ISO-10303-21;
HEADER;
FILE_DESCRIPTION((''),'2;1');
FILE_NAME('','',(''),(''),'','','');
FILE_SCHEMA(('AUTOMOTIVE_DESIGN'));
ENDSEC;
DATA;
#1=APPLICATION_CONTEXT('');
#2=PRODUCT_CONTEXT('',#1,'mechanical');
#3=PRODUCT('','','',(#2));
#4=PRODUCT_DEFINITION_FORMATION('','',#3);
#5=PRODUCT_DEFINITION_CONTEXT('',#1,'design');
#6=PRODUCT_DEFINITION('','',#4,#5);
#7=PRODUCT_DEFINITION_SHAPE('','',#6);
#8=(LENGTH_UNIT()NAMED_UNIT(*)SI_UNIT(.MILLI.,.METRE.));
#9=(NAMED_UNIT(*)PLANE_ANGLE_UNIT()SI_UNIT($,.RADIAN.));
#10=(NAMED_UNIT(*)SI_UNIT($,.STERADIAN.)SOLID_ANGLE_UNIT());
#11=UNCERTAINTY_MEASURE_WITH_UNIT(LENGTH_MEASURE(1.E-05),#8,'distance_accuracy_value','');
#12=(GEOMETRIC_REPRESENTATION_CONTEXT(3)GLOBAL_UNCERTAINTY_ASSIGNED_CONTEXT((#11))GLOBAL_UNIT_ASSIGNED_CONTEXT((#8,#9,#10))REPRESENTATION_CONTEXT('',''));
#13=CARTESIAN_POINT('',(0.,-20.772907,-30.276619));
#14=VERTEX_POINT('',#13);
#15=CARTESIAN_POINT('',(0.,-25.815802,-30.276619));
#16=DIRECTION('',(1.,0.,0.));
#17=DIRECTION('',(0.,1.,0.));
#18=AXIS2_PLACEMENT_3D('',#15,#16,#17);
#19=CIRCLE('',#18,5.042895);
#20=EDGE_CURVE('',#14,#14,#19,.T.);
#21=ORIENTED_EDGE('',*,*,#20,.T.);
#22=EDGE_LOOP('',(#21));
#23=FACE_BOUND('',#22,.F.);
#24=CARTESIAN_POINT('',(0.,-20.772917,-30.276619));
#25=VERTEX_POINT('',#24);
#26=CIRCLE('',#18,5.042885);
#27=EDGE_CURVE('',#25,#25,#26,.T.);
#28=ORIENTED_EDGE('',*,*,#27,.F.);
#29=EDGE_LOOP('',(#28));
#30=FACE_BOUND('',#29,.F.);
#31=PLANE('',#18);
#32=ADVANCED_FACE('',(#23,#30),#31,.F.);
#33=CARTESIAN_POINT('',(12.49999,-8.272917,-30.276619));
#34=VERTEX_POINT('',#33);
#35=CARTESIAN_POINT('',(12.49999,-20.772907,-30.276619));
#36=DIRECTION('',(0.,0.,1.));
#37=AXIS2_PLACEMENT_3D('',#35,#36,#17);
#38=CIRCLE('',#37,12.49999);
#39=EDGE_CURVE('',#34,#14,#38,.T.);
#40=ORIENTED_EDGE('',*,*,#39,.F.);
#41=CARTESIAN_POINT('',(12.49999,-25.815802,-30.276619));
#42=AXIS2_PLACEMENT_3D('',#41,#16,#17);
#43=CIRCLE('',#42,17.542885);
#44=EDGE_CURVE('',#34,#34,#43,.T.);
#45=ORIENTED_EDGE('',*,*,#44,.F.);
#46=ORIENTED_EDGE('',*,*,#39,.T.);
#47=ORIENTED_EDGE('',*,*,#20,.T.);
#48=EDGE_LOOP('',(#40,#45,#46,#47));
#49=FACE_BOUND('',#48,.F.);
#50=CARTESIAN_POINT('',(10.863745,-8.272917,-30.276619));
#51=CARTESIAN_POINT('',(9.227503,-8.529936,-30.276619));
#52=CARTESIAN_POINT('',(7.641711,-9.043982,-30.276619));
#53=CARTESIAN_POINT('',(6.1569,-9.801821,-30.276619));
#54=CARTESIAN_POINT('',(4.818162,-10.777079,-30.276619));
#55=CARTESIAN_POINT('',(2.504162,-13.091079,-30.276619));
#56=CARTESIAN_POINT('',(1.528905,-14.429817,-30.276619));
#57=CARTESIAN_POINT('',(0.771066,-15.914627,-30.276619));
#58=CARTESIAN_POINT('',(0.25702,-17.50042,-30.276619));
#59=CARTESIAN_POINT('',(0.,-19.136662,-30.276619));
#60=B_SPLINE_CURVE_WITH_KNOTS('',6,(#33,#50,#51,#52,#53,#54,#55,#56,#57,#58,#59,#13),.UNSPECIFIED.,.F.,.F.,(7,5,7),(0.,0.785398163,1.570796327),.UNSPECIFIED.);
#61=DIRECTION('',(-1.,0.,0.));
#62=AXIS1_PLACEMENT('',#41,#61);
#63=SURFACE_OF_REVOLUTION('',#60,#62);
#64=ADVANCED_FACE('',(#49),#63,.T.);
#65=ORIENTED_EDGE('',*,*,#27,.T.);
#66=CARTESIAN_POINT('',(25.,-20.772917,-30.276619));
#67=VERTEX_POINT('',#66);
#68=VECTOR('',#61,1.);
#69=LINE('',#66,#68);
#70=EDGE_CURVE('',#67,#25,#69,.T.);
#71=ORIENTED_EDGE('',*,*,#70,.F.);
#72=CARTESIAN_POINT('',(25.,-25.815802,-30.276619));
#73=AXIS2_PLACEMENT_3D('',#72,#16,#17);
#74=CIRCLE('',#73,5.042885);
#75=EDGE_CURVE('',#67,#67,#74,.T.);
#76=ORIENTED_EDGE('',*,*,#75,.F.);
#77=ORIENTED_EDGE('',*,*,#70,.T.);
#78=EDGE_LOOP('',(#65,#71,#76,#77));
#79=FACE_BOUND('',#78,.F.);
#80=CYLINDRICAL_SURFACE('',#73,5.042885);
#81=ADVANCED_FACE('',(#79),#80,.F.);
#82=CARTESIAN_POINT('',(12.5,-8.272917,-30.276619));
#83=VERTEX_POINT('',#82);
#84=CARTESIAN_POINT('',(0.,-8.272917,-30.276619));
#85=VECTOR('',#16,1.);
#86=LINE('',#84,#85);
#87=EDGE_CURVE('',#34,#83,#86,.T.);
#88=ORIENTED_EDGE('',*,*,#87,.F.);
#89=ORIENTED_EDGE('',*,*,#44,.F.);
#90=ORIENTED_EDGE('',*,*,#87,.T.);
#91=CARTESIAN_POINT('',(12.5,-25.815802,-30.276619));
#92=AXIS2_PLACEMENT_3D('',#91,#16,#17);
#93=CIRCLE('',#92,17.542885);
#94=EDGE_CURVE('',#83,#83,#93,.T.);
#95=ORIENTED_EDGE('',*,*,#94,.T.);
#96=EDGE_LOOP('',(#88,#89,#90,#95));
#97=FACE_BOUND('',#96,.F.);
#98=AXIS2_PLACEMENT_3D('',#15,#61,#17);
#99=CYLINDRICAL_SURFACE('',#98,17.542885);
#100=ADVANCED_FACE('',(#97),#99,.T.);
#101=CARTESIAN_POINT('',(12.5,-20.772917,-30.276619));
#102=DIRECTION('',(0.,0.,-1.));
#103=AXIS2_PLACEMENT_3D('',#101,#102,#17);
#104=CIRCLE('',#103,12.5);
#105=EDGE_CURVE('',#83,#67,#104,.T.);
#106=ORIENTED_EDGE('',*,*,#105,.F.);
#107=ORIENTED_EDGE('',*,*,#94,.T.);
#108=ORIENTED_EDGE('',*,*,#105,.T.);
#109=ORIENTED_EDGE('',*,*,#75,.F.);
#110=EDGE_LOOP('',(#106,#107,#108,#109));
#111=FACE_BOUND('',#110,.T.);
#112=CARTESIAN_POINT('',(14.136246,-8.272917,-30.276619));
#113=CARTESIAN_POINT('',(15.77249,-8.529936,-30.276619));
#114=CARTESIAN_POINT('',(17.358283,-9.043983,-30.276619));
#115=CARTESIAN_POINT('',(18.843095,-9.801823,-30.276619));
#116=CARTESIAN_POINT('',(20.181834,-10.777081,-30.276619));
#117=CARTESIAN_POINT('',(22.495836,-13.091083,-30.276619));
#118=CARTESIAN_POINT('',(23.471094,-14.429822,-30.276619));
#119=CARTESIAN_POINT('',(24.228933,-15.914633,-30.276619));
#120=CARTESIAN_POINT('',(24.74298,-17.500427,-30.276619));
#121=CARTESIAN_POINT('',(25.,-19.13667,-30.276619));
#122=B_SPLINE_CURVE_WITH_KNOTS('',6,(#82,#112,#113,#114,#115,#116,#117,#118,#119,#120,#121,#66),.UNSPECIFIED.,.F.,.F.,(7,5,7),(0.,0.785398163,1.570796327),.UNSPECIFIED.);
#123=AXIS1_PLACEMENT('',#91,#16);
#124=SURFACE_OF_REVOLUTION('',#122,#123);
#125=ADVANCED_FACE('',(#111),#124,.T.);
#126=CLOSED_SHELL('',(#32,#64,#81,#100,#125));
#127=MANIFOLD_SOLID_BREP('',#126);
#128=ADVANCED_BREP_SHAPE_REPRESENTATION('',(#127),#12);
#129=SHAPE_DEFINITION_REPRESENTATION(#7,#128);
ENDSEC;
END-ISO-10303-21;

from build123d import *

# Parameters (mm, degrees)
F0_R     = 17.5428851577
F1_DEPTH = 25
F2_R     = 12.5
F3_R     = 12.49999
F4_DEPTH = 25.001


# Not quite as in the source:
# - a fillet or chamfer is up to 0.001 mm smaller than in the source, because OpenCascade refuses the exact size


with BuildPart() as f1:
    # F0 (on Right) → F1 (new body)
    with BuildSketch(Plane.YZ):
        with Locations((-25.815801695, -30.2766188979)):
            Circle(F0_R)
    extrude(amount=F1_DEPTH)

    # F2
    f2_edges = [f1.edges().sort_by_distance(p)[0] for p in [
        (25, -43.358687, -30.276619),
    ]]
    fillet(f2_edges, radius=F2_R)

    # F3 (radius 12.5 in the source; OpenCascade refuses exactly that, so slightly less here)
    f3_edges = [f1.edges().sort_by_distance(p)[0] for p in [
        (0, -43.358687, -30.276619),
    ]]
    fillet(f3_edges, radius=F3_R)

    # F4 (cut, through all): a face of the model
    f4_faces = [f1.faces().sort_by_distance(p)[0] for p in [
        (25, -25.815801695, -30.2766188979),
    ]]
    extrude(f4_faces, amount=-F4_DEPTH, mode=Mode.SUBTRACT)


solid = f1.part
